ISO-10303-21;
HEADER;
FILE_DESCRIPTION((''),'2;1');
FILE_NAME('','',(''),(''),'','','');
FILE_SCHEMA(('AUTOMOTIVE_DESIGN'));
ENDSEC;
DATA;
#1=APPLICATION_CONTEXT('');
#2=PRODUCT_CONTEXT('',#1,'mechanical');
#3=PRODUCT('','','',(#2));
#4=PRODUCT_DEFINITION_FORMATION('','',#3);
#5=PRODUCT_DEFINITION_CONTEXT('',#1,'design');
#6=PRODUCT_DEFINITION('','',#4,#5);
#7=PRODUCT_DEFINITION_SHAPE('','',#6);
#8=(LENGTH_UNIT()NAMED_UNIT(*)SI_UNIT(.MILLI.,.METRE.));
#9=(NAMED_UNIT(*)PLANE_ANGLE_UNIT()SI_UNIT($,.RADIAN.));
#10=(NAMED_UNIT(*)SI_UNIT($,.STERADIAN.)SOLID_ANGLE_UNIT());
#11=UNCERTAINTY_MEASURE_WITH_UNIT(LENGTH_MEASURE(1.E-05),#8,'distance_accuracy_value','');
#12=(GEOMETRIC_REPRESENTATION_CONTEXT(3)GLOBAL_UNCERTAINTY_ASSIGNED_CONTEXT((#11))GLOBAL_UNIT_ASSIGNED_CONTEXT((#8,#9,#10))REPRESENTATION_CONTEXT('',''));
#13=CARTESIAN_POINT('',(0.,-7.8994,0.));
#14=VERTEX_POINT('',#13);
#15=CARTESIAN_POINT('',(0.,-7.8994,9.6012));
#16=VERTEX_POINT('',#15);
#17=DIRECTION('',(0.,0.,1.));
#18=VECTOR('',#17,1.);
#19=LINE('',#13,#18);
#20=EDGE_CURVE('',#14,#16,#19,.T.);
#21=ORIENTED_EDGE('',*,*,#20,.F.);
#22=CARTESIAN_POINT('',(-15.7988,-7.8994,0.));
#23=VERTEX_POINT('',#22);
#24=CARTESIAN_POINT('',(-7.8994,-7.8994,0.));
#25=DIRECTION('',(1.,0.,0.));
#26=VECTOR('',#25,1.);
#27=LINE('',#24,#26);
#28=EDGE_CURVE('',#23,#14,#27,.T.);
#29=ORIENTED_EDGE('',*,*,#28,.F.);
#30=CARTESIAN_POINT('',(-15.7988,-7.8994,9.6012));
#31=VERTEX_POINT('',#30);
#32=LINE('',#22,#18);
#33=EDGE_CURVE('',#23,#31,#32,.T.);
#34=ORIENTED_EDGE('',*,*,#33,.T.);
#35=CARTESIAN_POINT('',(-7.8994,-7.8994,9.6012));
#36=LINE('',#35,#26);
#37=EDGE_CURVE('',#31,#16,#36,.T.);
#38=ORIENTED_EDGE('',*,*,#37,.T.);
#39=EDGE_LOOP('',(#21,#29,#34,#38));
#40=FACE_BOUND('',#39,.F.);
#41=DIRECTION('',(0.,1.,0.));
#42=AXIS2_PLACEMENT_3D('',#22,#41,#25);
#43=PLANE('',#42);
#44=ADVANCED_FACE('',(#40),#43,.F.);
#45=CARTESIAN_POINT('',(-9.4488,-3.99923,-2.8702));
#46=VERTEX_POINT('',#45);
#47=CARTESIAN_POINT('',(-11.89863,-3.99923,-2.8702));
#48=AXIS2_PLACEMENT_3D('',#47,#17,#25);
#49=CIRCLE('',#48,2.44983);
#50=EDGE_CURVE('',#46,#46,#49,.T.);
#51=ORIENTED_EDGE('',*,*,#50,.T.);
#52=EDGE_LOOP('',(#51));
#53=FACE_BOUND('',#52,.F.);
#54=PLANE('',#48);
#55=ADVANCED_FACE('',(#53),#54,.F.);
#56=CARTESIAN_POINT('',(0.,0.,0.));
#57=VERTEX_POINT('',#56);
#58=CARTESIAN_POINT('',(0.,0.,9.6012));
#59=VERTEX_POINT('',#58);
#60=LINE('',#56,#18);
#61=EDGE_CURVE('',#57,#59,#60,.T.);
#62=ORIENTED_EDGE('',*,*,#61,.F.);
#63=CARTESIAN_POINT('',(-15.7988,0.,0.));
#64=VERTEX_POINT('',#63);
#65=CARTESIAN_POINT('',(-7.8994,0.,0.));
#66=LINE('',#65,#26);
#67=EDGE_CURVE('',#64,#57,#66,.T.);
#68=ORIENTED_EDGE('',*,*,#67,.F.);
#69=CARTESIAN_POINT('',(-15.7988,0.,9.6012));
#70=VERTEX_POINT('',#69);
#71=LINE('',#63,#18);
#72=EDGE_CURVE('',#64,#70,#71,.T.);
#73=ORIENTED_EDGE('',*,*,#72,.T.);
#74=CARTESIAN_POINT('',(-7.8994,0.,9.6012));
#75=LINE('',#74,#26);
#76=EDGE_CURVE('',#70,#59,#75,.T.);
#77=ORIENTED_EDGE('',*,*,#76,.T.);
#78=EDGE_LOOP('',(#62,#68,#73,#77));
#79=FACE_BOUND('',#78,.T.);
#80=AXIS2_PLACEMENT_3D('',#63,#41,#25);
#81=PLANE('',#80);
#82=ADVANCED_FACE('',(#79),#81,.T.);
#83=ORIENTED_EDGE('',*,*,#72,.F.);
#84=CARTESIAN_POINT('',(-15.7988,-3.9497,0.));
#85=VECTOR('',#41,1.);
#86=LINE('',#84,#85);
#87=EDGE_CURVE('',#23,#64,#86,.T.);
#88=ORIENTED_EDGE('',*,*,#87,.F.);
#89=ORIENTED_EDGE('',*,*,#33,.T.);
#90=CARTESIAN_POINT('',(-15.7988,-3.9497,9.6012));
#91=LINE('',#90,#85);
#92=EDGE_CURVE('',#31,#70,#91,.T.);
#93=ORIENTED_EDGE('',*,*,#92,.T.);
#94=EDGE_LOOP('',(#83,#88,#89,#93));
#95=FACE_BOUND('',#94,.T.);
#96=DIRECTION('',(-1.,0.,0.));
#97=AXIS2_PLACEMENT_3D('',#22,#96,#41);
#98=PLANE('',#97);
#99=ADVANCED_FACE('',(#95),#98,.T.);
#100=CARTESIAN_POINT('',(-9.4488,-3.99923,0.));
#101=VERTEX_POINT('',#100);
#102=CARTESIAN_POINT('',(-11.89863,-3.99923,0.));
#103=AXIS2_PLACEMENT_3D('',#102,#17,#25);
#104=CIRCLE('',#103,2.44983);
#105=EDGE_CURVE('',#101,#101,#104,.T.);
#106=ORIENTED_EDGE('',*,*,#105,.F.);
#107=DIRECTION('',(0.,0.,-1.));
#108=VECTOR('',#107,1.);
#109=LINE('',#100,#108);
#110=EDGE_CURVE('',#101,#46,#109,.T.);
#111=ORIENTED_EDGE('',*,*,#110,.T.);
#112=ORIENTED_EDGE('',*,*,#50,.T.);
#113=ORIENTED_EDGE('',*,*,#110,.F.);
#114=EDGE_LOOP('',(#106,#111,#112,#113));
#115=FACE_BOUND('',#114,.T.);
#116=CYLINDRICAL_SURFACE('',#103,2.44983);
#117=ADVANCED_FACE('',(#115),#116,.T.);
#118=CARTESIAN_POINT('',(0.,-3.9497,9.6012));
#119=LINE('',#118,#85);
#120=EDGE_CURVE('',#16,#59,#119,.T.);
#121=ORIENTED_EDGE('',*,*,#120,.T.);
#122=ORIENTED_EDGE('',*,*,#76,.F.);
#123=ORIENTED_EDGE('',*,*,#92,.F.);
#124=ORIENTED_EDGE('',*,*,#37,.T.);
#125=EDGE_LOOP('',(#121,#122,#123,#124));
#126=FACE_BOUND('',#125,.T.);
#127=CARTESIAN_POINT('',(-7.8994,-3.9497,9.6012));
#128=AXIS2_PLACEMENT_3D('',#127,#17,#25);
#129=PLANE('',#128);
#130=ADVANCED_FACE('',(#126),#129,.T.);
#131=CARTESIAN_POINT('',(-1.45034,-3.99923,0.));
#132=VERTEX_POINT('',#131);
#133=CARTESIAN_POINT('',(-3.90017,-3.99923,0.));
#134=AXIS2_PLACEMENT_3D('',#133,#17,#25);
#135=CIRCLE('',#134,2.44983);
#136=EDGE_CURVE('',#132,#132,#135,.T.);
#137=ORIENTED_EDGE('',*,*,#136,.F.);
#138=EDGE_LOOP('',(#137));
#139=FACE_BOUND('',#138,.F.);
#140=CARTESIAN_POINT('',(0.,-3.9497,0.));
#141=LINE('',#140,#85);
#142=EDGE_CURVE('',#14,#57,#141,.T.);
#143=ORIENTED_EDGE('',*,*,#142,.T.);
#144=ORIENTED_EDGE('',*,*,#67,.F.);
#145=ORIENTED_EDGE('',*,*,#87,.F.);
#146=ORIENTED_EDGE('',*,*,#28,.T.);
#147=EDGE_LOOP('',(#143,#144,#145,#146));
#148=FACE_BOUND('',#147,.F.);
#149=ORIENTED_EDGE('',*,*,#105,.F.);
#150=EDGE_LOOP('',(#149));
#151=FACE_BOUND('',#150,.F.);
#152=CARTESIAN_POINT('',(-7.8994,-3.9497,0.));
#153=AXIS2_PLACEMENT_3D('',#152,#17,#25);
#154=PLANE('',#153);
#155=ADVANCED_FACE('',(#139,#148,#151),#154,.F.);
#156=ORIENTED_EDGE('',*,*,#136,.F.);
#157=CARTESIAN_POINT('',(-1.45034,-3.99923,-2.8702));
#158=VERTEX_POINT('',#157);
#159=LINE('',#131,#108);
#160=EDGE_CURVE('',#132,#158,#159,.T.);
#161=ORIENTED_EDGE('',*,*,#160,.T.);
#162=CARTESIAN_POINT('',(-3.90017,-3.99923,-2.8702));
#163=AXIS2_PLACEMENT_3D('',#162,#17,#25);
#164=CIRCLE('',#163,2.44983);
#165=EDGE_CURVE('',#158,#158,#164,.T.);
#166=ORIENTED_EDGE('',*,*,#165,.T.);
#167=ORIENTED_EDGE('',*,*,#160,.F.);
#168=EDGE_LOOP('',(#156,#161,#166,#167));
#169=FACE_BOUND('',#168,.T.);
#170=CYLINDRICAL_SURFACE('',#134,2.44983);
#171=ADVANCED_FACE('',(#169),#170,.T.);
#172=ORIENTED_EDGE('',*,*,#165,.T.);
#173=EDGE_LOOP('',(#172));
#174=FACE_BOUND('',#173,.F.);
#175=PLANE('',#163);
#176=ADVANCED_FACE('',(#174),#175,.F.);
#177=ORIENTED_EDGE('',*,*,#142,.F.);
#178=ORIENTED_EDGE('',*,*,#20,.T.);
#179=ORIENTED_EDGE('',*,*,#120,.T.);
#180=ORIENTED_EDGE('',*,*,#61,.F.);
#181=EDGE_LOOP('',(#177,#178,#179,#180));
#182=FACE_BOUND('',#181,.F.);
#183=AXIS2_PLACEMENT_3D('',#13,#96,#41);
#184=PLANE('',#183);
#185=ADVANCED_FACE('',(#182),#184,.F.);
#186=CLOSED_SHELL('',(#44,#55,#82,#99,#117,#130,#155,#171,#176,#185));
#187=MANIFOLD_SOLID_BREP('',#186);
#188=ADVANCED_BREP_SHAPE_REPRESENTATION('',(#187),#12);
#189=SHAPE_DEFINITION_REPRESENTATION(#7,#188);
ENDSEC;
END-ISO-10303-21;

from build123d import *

# Parameters (mm, degrees)
F0_W     = 15.7988
F0_H     = 7.8994
F0_R     = 2.44983
F1_DEPTH = 9.6012
F2_DEPTH = 2.8702


# Not quite as in the source:
# - a feature names something its author has since deleted; it is built from what else it names


with BuildPart() as f1:
    # F0 (on Top) → F1 (new body)
    with BuildSketch(Plane.XY):
        with Locations((-7.8994, -3.9497)):
            Rectangle(F0_W, F0_H)
        with Locations((-11.89863, -3.99923)):
            Circle(F0_R, mode=Mode.SUBTRACT)
        with Locations((-3.90017, -3.99923)):
            Circle(F0_R, mode=Mode.SUBTRACT)
        with Locations((-11.89863, -3.99923)):
            Circle(F0_R)
        with Locations((-3.90017, -3.99923)):
            Circle(F0_R)
    extrude(amount=F1_DEPTH)

    # F0 (on Top) → F2 (join)
    with BuildSketch(Plane.XY):
        with Locations((-3.90017, -3.99923)):
            Circle(F0_R)
        with Locations((-11.89863, -3.99923)):
            Circle(F0_R)
    extrude(amount=-F2_DEPTH)


solid = f1.part
